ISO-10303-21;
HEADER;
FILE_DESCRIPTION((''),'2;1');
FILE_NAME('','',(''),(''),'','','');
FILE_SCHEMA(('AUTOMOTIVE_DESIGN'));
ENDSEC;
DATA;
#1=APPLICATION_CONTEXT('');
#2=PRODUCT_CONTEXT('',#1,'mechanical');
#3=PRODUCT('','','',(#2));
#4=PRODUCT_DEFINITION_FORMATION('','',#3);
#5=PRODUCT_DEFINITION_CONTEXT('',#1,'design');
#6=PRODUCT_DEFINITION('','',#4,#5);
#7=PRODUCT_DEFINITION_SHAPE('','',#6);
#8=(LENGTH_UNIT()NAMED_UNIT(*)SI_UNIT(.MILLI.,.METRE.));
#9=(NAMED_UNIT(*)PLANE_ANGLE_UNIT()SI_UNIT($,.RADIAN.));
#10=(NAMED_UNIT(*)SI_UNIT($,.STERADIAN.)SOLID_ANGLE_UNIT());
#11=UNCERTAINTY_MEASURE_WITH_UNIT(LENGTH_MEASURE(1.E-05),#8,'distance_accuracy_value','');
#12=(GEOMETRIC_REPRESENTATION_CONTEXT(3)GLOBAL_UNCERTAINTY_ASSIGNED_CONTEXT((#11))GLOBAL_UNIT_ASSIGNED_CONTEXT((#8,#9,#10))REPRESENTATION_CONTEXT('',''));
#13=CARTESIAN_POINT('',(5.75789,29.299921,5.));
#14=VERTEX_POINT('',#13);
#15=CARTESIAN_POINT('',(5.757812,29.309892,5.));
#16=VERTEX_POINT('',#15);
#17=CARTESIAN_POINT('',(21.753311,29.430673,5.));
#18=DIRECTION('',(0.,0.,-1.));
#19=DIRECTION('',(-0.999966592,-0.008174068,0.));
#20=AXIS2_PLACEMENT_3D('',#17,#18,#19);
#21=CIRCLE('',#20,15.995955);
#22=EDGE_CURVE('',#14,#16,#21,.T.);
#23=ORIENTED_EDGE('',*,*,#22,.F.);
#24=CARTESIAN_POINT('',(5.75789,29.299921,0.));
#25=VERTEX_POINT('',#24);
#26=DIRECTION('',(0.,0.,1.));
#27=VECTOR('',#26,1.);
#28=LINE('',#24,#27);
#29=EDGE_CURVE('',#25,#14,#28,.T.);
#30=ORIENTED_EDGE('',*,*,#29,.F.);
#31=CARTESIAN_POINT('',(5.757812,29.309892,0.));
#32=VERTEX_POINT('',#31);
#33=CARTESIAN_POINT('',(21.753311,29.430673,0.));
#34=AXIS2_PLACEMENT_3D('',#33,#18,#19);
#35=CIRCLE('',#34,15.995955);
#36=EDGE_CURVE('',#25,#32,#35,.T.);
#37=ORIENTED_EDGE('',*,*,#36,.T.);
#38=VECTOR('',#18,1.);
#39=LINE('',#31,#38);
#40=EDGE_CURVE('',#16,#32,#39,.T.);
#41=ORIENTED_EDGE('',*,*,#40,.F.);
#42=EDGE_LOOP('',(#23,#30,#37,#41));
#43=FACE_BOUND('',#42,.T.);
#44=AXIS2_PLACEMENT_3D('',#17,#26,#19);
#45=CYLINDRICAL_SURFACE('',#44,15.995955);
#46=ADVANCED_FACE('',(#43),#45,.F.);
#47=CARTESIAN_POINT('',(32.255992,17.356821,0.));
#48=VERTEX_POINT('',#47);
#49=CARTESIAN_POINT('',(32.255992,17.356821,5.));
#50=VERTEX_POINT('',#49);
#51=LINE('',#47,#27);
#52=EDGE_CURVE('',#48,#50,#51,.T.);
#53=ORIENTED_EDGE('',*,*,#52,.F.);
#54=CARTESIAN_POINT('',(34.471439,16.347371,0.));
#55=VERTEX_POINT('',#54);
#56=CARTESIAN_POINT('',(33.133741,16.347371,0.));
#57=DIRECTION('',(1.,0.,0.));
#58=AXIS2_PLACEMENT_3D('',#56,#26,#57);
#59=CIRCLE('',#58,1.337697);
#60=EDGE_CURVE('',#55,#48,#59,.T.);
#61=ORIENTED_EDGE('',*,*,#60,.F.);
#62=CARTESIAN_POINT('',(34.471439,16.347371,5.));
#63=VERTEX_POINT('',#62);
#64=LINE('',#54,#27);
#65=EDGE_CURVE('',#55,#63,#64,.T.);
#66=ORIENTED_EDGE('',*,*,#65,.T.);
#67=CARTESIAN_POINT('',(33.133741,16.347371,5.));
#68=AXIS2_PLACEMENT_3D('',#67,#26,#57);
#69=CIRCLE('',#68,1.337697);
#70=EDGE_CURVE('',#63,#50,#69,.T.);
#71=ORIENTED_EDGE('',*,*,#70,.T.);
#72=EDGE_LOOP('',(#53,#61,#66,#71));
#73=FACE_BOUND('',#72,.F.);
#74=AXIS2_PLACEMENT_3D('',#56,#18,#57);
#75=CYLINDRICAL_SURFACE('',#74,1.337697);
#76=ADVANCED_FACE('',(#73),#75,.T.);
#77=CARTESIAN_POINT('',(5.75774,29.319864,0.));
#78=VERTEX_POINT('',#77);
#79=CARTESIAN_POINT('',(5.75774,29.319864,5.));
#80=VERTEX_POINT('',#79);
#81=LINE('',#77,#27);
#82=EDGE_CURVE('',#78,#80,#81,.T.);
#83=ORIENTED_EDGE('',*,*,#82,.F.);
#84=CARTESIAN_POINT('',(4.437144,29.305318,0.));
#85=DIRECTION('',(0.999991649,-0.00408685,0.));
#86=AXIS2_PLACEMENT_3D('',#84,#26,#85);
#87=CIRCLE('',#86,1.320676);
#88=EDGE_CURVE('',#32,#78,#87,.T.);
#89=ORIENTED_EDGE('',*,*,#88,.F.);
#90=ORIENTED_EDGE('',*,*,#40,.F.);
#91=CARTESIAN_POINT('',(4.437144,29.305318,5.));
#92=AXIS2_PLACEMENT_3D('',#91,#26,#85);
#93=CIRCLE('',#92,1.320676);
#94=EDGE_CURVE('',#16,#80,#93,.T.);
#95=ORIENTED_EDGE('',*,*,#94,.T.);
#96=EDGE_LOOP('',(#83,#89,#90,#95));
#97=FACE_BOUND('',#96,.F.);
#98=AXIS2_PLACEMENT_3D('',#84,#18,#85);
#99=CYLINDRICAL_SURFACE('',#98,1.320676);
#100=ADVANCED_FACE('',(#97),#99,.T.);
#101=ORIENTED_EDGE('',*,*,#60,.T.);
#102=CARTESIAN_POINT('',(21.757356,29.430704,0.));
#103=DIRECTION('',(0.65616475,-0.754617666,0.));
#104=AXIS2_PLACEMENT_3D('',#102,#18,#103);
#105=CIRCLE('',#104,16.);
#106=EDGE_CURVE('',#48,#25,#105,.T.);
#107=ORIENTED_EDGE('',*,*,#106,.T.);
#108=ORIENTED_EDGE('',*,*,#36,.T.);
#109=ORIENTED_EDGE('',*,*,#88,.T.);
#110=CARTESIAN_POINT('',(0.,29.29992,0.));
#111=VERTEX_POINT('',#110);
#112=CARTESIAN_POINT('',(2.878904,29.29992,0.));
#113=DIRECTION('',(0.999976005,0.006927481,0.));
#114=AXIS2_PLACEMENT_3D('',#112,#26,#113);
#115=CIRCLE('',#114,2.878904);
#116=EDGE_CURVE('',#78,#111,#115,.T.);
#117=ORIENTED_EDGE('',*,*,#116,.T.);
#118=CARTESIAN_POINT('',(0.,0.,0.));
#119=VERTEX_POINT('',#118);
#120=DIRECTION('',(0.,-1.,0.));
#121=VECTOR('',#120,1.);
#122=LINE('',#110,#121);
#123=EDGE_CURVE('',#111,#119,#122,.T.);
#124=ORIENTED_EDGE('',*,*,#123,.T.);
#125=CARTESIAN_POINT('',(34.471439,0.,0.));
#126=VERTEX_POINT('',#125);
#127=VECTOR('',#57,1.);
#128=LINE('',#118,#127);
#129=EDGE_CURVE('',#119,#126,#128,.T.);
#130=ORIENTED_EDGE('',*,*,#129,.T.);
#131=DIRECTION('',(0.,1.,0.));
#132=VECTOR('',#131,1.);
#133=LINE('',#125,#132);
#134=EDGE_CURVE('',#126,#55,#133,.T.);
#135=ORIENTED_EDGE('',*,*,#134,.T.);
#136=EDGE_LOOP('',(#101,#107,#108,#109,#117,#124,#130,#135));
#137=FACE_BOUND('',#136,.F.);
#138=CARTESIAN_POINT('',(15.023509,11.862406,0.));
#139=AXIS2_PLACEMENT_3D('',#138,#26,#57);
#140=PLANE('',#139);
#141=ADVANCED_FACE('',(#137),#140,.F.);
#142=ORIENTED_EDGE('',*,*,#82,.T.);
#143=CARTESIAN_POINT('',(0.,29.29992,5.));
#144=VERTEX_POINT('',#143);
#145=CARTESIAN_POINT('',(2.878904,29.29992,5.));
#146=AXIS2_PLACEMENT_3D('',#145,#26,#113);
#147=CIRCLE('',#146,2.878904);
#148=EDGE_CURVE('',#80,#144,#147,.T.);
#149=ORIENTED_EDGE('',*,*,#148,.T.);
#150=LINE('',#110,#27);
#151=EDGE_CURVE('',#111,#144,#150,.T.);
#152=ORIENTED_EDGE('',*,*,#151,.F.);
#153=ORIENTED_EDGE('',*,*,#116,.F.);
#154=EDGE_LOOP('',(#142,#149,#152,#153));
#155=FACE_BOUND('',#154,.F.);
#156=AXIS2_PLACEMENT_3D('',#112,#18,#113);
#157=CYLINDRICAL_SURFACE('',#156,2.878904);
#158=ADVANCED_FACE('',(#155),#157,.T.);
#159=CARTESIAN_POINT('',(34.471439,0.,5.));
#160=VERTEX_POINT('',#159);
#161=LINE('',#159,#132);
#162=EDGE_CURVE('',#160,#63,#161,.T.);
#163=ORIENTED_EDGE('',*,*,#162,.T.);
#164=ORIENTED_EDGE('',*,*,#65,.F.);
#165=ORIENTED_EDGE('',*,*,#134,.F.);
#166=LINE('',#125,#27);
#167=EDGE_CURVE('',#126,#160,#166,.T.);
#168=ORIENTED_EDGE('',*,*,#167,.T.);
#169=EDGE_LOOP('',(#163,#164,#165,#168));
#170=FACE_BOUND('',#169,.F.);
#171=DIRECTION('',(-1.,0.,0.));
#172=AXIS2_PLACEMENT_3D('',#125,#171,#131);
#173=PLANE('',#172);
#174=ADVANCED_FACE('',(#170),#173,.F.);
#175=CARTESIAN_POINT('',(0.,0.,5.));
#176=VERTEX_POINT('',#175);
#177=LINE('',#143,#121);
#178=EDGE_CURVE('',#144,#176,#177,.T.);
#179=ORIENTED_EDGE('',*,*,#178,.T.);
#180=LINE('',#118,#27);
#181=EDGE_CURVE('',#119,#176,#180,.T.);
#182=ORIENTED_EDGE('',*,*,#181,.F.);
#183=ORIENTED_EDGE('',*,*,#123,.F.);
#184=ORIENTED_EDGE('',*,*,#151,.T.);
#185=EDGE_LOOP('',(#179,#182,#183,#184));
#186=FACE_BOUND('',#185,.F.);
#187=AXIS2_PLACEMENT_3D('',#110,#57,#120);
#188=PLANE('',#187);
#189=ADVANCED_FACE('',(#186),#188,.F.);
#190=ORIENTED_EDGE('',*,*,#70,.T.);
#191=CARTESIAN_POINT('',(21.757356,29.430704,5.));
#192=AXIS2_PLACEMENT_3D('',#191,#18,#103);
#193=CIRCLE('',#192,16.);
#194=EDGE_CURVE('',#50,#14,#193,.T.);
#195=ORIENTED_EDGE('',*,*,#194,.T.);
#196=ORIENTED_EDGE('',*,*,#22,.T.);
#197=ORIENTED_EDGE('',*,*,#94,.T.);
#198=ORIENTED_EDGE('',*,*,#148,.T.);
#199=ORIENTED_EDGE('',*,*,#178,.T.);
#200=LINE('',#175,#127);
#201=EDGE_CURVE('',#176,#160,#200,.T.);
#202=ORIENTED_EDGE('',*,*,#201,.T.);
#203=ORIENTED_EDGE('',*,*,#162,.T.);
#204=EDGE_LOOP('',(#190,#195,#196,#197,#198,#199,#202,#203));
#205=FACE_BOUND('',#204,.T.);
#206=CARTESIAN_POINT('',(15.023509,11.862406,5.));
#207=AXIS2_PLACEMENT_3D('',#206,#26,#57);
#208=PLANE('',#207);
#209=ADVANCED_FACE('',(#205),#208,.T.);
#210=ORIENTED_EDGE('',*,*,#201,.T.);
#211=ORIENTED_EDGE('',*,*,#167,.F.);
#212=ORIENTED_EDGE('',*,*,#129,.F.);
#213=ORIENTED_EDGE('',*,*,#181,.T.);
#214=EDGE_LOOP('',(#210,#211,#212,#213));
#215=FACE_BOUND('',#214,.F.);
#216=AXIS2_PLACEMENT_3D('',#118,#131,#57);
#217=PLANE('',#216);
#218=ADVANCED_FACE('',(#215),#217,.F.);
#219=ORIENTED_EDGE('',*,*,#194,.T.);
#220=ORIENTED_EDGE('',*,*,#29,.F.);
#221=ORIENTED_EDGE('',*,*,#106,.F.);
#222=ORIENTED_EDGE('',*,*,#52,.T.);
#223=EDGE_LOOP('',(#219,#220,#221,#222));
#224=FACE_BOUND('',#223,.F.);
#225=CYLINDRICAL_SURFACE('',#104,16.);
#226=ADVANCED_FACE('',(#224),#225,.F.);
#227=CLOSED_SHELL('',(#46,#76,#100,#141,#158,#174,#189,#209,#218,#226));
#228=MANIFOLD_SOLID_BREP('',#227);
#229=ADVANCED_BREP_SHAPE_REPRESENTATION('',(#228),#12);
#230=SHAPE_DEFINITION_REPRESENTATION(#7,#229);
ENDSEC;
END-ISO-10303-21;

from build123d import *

# Parameters (mm, degrees)
F1_DEPTH = 5
F3_DEPTH = 5


# Not quite as in the source:
# - ends of sketch curves that miss each other by under 0.0002 mm in the source are joined
# - a feature names something its author has since deleted; it is built from what else it names


with BuildPart() as f1:
    # F0 (on Top) → F1 (new body)
    with BuildSketch(Plane.XY):
        with BuildLine():
            Line((0, 29.2999204248), (0, 0))
            Line((0, 0), (34.4714387385, 0))
            Line((34.4714387385, 0), (34.4714387385, 16.3473710418))
            ThreePointArc((34.4714387385, 16.3473710418), (32.5790927131, 15.1300794804), (32.2559916738, 17.3568210333))
            ThreePointArc((32.2559916738, 17.3568210333), (15.182844974, 14.8438668457), (5.7578901922, 29.2999210911))
            ThreePointArc((5.7578901922, 29.2999210911), (2.8789043427, 26.4210160822), (0, 29.2999204248))
        make_face()
        with BuildLine():
            ThreePointArc((5.7577396052, 29.3198639813), (2.8689325046, 32.1788074974), (0, 29.2999204248))
            ThreePointArc((0, 29.2999204248), (2.8789043427, 26.4210160822), (5.7578086853, 29.2999204248))
            ThreePointArc((5.7578086853, 29.2999204248), (5.7578117914, 29.3098925127), (5.7577396052, 29.3198639813))
        make_face()
        with BuildLine():
            ThreePointArc((32.2559916738, 17.3568210333), (32.5790927131, 15.1300794804), (34.4714387385, 16.3473710418))
            ThreePointArc((34.4714387385, 16.3473710418), (33.6883902233, 17.5646626032), (32.2559916738, 17.3568210333))
        make_face()
    extrude(amount=F1_DEPTH)

    # F2 (on face) → F3 (join)
    with BuildSketch(Plane.XY.offset(5)):
        with BuildLine():
            ThreePointArc((34.4714387385, 16.3473710418), (33.6883902233, 17.5646626032), (32.2559916738, 17.3568210333))
            ThreePointArc((32.2559916738, 17.3568210333), (15.182844974, 14.8438668457), (5.7578901922, 29.2999210911))
            ThreePointArc((5.7578901922, 29.2999210911), (5.757811792, 29.3098923335), (5.7577396052, 29.3198639813))
            ThreePointArc((5.7577396052, 29.3198639813), (2.8689325046, 32.1788074974), (0, 29.2999204248))
            Line((0, 29.2999204248), (0, 0))
            Line((0, 0), (34.4714387385, 0))
            Line((34.4714387385, 0), (34.4714387385, 16.3473710418))
        make_face()
    extrude(amount=-F3_DEPTH)


solid = f1.part
